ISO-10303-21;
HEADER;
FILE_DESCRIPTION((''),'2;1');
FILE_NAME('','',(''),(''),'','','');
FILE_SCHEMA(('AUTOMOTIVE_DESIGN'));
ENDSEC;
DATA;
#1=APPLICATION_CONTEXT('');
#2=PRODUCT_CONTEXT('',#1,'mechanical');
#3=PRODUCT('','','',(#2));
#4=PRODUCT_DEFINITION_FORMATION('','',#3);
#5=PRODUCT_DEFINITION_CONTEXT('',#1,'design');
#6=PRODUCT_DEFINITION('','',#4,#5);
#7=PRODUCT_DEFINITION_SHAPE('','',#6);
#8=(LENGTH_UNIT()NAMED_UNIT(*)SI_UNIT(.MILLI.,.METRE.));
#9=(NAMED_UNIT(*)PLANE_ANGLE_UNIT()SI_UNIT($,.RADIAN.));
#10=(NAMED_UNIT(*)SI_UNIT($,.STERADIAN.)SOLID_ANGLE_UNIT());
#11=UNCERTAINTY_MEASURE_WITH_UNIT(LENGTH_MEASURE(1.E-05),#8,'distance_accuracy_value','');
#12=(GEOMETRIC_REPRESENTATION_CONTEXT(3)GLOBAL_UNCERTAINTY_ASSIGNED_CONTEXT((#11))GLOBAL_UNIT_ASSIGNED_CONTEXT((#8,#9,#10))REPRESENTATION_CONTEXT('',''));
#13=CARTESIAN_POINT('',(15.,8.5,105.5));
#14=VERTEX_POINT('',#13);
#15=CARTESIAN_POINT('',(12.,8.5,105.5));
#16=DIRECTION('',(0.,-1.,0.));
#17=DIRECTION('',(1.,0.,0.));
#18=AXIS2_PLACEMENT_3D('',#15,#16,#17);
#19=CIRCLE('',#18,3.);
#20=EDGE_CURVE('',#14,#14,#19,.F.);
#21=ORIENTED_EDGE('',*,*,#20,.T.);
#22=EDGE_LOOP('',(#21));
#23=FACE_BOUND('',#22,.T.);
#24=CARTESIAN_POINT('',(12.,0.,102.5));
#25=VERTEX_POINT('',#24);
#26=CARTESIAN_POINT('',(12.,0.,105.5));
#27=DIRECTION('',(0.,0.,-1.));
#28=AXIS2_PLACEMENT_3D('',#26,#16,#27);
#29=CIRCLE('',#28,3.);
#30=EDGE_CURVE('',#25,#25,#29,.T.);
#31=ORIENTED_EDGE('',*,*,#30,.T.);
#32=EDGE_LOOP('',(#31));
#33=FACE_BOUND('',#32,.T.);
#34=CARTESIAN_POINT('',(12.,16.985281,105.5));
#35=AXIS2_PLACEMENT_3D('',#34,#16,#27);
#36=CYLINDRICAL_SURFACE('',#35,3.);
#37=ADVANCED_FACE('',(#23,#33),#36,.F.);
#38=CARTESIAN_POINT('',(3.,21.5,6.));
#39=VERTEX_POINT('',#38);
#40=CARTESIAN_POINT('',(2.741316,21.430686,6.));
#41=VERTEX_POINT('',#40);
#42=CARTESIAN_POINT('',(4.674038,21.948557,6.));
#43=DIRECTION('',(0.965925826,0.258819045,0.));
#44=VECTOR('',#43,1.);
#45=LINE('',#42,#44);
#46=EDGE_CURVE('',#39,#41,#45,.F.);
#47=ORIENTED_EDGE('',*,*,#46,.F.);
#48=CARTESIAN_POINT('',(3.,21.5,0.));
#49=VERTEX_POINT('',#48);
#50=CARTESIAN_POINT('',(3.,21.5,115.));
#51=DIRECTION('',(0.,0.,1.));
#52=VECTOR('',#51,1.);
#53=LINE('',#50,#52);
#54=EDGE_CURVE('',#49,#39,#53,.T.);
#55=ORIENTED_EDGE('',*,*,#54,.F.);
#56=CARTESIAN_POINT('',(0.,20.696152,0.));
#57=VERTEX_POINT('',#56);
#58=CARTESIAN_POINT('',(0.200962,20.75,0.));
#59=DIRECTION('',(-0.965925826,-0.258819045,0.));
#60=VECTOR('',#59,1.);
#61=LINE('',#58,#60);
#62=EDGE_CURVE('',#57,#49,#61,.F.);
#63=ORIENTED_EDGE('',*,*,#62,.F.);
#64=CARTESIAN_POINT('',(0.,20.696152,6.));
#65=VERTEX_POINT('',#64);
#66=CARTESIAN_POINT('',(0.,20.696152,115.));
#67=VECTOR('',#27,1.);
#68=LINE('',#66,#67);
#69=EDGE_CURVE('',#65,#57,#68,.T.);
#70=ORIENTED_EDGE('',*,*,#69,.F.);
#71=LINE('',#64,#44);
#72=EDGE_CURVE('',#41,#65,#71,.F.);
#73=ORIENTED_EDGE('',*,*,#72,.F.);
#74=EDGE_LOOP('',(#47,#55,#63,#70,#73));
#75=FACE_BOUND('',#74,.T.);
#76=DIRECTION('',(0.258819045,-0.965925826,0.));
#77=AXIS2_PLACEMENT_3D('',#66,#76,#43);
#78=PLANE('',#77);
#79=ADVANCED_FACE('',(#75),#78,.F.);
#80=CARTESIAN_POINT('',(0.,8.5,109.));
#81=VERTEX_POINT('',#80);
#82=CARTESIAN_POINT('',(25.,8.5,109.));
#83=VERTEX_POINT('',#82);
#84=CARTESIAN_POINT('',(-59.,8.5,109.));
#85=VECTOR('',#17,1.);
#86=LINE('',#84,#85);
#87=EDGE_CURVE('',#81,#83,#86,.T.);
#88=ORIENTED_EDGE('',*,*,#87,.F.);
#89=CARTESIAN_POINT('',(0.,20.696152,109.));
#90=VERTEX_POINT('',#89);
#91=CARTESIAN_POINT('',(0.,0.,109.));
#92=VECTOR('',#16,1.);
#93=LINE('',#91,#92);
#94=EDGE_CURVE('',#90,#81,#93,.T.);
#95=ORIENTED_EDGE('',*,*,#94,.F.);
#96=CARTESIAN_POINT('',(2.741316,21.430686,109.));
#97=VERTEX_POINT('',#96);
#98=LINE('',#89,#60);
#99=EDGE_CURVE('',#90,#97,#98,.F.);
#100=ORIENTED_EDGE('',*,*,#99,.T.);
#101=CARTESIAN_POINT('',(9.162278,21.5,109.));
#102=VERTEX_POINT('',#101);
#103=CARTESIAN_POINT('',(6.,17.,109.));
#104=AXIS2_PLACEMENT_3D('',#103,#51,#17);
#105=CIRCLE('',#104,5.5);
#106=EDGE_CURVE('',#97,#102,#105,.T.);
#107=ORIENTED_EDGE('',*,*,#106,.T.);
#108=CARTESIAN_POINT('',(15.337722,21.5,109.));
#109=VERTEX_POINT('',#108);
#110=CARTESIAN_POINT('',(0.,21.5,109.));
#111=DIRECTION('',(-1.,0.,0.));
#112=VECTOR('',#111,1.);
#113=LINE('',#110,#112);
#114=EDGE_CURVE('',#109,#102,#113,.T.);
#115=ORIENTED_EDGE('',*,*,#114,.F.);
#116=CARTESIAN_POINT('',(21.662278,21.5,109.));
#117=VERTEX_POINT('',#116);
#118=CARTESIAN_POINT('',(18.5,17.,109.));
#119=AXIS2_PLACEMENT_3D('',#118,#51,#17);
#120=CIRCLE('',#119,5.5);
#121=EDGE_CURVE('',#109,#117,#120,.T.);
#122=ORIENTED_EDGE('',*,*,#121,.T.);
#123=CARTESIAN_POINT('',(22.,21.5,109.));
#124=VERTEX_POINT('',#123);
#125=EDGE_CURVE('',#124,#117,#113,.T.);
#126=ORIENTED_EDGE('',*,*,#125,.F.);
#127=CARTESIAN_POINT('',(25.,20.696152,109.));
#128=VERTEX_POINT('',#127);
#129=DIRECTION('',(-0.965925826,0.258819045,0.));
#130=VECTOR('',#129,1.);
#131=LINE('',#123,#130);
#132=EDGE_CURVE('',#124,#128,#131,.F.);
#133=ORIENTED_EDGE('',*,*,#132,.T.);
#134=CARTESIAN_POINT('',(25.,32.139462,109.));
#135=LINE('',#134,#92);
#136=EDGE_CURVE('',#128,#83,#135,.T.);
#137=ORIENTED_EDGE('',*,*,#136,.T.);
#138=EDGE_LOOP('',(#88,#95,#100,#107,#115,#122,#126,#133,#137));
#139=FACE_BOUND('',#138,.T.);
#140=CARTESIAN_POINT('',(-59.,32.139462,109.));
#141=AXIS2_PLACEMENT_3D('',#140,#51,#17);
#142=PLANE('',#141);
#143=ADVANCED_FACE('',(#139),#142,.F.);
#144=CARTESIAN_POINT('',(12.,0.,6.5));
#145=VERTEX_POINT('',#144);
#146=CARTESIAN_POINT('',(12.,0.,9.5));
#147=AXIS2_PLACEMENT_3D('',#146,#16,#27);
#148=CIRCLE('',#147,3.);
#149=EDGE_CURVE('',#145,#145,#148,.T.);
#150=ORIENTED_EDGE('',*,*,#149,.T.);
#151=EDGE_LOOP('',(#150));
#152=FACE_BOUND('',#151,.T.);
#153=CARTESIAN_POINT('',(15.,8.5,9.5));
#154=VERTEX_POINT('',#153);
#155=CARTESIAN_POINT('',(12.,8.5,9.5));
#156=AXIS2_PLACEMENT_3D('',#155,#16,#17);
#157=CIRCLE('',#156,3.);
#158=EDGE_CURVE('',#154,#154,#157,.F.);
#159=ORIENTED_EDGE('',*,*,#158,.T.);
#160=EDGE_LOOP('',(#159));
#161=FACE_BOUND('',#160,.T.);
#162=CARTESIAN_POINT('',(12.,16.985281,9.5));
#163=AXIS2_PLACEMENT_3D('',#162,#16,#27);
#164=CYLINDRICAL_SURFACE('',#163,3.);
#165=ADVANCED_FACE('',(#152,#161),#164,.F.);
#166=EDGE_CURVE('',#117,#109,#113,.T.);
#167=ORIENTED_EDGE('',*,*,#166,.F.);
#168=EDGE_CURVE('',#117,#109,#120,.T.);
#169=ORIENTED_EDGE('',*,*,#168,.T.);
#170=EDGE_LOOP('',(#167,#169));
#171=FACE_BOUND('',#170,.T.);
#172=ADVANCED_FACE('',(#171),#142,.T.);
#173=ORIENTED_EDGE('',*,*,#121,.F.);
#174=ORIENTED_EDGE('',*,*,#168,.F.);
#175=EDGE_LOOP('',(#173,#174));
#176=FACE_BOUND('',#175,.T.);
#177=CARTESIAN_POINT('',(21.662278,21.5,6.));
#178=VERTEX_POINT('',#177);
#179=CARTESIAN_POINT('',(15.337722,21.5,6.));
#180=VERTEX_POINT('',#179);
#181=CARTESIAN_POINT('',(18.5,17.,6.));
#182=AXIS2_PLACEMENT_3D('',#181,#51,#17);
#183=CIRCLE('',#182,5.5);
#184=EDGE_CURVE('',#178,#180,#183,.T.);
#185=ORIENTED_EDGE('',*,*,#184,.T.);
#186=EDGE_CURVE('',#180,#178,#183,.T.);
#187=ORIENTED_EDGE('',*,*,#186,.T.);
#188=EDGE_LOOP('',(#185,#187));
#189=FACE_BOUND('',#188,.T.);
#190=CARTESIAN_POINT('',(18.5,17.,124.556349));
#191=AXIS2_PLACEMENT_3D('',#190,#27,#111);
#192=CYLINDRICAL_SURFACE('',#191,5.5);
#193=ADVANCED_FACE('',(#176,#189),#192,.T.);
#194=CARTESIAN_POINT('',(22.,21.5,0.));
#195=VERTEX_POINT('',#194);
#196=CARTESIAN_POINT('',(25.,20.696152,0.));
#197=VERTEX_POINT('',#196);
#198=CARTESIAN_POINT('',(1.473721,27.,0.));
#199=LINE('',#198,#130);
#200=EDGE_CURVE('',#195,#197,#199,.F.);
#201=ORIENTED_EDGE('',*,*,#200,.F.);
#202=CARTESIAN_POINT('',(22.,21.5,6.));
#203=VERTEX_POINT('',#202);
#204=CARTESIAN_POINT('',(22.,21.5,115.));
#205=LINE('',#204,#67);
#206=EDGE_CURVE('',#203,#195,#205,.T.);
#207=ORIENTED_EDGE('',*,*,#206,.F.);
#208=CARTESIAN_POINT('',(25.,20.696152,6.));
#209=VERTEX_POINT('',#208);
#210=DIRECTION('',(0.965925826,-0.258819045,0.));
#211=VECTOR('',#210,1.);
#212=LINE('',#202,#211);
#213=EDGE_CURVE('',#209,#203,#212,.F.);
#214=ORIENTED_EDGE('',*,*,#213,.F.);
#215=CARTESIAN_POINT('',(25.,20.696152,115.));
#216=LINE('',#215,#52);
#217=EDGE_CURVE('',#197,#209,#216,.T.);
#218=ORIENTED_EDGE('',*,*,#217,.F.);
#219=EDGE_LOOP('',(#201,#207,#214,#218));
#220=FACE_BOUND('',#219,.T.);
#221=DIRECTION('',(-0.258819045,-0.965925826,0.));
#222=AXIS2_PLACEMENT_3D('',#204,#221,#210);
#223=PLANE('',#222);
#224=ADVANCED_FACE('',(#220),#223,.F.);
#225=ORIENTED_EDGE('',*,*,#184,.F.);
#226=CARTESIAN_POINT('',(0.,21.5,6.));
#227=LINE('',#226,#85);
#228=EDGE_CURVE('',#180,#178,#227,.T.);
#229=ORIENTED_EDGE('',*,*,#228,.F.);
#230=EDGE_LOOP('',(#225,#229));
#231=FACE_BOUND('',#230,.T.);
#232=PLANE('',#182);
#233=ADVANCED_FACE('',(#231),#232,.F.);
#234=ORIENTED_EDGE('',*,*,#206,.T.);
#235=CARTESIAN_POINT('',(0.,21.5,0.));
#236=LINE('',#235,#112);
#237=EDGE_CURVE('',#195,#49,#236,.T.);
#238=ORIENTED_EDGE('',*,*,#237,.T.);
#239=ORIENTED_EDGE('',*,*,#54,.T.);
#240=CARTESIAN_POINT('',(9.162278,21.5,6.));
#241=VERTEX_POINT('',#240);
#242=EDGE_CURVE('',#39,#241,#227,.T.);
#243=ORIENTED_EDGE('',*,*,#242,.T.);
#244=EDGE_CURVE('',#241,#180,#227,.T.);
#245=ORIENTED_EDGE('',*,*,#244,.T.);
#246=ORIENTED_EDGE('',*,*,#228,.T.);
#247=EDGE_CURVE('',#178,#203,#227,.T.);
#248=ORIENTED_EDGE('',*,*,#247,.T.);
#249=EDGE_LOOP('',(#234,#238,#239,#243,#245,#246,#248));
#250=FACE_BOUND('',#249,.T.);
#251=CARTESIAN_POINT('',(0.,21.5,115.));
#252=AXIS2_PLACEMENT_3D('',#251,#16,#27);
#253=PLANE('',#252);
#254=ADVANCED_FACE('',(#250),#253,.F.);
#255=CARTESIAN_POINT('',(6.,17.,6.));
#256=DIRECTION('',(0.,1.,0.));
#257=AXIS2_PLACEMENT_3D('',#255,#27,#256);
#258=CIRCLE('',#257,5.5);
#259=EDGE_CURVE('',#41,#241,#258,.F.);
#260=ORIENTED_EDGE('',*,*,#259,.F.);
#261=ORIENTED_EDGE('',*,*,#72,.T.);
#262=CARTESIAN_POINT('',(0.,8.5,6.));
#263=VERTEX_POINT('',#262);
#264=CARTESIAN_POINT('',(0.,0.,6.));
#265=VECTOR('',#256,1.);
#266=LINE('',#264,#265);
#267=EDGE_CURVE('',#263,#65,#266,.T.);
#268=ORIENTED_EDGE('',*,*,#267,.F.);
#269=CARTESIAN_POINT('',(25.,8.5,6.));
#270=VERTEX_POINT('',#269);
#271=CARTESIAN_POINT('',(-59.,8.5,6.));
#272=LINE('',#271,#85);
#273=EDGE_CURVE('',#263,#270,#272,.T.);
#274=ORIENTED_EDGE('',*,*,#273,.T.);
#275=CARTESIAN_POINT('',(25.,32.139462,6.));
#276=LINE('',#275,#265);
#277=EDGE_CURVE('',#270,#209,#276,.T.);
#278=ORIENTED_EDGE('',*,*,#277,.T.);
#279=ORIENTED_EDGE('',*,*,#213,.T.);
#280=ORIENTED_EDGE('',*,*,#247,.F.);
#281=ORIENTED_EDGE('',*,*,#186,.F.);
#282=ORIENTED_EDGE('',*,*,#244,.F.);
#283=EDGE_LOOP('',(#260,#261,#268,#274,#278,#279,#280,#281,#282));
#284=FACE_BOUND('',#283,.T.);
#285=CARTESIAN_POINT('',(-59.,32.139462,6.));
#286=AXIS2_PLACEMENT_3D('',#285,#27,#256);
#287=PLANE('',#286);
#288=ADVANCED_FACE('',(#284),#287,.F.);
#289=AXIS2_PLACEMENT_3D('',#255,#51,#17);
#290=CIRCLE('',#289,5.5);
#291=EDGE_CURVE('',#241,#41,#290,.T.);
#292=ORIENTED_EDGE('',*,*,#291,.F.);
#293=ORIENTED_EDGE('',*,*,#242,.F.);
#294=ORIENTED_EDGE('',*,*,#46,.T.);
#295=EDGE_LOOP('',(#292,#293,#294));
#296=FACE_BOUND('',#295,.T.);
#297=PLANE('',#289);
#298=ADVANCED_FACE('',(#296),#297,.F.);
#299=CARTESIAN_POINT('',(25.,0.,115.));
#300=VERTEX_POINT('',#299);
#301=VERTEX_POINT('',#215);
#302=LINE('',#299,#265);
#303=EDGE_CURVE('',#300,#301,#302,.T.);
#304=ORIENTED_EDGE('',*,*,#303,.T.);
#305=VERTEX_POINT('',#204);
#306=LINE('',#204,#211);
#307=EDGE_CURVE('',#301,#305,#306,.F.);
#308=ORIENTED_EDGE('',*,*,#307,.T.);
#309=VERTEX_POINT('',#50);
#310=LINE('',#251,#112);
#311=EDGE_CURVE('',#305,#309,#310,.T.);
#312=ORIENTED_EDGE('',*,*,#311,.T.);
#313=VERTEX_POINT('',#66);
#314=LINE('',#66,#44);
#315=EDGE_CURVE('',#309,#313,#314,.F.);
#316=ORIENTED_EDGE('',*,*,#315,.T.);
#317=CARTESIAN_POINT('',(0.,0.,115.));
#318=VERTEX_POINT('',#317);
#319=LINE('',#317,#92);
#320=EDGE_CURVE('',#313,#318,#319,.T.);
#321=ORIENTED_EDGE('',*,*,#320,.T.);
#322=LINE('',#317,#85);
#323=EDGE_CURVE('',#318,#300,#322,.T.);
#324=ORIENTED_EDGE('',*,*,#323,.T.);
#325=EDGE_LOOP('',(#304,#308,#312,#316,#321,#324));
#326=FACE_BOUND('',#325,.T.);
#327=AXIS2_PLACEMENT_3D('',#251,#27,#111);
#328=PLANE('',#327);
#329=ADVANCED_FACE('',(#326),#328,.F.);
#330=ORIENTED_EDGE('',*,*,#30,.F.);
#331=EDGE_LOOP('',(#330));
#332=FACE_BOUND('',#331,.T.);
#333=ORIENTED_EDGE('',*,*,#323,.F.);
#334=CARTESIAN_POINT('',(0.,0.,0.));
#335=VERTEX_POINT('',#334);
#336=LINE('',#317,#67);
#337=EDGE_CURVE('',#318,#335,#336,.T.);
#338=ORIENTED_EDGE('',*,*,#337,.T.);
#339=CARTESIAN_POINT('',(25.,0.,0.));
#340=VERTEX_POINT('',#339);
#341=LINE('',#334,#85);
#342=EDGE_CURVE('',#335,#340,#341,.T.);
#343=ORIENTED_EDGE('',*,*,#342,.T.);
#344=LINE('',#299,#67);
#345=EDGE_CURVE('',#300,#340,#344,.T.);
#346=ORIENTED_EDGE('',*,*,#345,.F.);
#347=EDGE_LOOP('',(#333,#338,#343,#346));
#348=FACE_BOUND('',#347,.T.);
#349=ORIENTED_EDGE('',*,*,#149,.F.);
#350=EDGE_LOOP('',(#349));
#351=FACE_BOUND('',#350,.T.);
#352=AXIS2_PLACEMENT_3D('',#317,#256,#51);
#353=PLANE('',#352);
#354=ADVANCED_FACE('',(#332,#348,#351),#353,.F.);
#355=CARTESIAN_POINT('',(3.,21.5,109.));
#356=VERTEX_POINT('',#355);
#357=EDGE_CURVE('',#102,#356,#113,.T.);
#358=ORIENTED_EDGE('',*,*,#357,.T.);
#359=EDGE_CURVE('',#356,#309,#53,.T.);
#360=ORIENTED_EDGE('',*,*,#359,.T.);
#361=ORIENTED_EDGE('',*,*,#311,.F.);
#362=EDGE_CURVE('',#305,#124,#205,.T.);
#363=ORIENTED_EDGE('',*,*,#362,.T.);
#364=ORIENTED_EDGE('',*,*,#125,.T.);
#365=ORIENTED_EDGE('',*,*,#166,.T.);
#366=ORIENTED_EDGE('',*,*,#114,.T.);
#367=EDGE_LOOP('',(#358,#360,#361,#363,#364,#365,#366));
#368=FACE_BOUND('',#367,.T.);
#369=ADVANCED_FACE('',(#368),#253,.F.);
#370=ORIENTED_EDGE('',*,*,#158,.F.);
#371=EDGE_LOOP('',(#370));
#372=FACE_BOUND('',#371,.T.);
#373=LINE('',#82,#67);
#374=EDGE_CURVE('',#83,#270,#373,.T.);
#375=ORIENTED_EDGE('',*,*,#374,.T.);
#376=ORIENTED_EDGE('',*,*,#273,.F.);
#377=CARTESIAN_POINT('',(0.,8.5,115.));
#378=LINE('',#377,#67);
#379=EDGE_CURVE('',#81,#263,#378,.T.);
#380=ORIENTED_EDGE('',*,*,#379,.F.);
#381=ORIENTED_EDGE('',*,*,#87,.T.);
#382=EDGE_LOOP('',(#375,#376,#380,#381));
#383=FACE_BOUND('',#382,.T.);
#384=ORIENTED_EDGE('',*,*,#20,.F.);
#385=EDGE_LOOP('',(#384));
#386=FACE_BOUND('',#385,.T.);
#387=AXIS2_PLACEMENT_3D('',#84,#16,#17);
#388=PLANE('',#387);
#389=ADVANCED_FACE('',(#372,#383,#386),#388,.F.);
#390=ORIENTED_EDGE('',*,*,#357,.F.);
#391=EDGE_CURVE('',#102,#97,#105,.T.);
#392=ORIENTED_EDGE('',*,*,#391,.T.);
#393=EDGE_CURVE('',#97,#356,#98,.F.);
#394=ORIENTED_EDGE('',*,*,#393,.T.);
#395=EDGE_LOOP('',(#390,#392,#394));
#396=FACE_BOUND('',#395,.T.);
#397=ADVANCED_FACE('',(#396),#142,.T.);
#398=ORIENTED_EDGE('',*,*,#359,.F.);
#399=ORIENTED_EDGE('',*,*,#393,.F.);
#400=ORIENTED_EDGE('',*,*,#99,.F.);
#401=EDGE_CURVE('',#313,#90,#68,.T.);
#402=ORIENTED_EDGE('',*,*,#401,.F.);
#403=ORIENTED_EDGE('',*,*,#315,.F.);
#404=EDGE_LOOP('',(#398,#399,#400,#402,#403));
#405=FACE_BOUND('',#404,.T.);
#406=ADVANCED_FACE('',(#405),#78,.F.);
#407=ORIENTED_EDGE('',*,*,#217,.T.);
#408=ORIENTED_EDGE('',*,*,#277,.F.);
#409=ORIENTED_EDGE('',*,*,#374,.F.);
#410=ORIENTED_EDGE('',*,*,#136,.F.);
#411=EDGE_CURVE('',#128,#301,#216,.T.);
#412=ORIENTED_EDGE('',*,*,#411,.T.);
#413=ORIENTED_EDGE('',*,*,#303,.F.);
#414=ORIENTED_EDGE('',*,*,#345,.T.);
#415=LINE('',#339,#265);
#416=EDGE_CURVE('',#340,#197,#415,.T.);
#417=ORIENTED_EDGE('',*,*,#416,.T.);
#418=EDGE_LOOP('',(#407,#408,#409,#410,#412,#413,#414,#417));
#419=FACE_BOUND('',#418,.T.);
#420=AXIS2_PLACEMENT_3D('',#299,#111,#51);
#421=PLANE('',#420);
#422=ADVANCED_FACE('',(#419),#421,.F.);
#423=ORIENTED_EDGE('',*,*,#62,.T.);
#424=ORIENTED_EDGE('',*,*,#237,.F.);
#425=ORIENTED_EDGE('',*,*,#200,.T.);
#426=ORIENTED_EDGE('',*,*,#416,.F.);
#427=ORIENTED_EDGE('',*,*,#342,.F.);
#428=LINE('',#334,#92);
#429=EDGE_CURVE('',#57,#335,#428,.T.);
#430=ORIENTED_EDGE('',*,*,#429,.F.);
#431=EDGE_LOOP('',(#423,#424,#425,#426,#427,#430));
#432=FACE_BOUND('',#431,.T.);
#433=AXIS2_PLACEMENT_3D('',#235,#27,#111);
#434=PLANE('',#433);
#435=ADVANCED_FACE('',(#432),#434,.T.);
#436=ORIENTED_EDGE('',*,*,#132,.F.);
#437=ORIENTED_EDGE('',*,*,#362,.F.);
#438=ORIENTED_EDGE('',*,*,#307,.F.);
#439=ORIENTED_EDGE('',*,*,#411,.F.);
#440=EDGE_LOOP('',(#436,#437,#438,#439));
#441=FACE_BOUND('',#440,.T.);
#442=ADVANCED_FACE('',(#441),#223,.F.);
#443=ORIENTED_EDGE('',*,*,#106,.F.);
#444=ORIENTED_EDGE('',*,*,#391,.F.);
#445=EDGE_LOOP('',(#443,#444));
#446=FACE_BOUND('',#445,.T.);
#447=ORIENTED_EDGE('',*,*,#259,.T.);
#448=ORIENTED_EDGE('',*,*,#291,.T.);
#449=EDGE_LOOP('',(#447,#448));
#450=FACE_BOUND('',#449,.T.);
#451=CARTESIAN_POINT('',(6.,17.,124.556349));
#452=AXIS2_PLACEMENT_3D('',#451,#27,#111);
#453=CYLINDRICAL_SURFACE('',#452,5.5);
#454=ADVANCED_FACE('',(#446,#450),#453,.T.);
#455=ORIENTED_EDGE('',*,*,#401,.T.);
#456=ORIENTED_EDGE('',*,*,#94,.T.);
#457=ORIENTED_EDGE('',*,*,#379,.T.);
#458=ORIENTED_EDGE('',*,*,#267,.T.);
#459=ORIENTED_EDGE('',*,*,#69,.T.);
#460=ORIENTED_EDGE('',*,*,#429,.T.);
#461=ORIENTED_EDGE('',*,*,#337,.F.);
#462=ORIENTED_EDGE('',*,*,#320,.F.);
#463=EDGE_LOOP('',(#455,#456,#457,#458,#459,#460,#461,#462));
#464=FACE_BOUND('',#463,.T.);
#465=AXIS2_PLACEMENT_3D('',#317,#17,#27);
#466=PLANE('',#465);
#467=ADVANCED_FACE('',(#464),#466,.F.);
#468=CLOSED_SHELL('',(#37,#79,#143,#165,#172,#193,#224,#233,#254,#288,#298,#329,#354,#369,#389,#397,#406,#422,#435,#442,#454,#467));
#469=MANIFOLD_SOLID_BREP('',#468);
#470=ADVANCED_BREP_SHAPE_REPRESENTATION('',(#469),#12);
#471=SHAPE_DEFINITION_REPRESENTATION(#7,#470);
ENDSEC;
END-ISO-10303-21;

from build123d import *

# Parameters (mm, degrees)
SCHIZZO1_W               = 25
SCHIZZO1_H               = 21.5
ESTRUSIONE1_DEPTH        = 115
SCHIZZO6_W               = 103
SCHIZZO6_H               = 23.639461627
TAGLIO_ESTRUSIONE4_DEPTH = 84
SCHIZZO7_R               = 5.5
ESTRUSIONE4_DEPTH        = 103
SMUSSO1_SIZE             = 0.803847577
SMUSSO1_SIZE_2           = 3
SCHIZZO8_R               = 3
TAGLIO_ESTRUSIONE5_DEPTH = 8.5


with BuildPart() as part:
    # Schizzo1 → Estrusione1 (new body)
    with BuildSketch(Plane.XY):
        with Locations((12.5, 10.75)):
            Rectangle(SCHIZZO1_W, SCHIZZO1_H)
    extrude(amount=ESTRUSIONE1_DEPTH)

    # Schizzo6 → Taglio-Estrusione4 (cut)
    with BuildSketch(Plane(origin=(25, 0, 0), x_dir=(0, 0, -1), z_dir=(1, 0, 0))):
        with Locations((-57.5, 20.319730814)):
            Rectangle(SCHIZZO6_W, SCHIZZO6_H)
    extrude(amount=-TAGLIO_ESTRUSIONE4_DEPTH, mode=Mode.SUBTRACT)

    # Schizzo7 → Estrusione4 (add)
    with BuildSketch(Plane.XY.offset(6)):
        with Locations(Location((6, 17, 0), (0, 0, 125.096801228))):
            Circle(SCHIZZO7_R)
        with Locations(Location((18.5, 17, 0), (0, 0, 125.096801228))):
            Circle(SCHIZZO7_R)
    extrude(amount=ESTRUSIONE4_DEPTH)

    # Smusso1
    # the kernel refuses this chamfer: 3, 0.803847577 mm, written as the material it takes off along each edge
    with BuildSketch(Plane(origin=(0, 21.5, -7.790164711), x_dir=(-0.13751244702128895, -0.9905000388259545, 0), z_dir=(0, 0, 1)), Plane(origin=(0, 21.5, 109), x_dir=(-0.13751244702128895, -0.9905000388259545, 0), z_dir=(0, 0, 1))) as smusso1_piece_1:
        Polygon((SMUSSO1_SIZE * 0.990500039187, SMUSSO1_SIZE * 0.137512447071), (-SMUSSO1_SIZE_2 * 0.137512447021, SMUSSO1_SIZE_2 * 0.990500038826), (0, 0), align=None)
    extrude(amount=13.790164711, mode=Mode.SUBTRACT)
    with BuildSketch(Plane(origin=(25, 21.5, -7.790164711), x_dir=(0.13751244702128734, -0.9905000388259546, 0), z_dir=(0, 0, 1)), Plane(origin=(25, 21.5, 101.209835289), x_dir=(0.13751244702128734, -0.9905000388259546, 0), z_dir=(0, 0, 1))) as smusso1_piece_2:
        Polygon((SMUSSO1_SIZE * 0.990500039187, -SMUSSO1_SIZE * 0.137512447071), (-SMUSSO1_SIZE_2 * 0.137512447021, -SMUSSO1_SIZE_2 * 0.990500038826), (0, 0), align=None)
    extrude(amount=21.580329421, mode=Mode.SUBTRACT)

    # Schizzo8 → Taglio-Estrusione5 (cut)
    with BuildSketch(Plane.XZ):
        with Locations(Location((12, 105.5, 0), (0, 0, 270))):
            Circle(SCHIZZO8_R)
        with Locations(Location((12, 9.5, 0), (0, 0, 270))):
            Circle(SCHIZZO8_R)
    extrude(amount=-TAGLIO_ESTRUSIONE5_DEPTH, mode=Mode.SUBTRACT)


solid = part.part
